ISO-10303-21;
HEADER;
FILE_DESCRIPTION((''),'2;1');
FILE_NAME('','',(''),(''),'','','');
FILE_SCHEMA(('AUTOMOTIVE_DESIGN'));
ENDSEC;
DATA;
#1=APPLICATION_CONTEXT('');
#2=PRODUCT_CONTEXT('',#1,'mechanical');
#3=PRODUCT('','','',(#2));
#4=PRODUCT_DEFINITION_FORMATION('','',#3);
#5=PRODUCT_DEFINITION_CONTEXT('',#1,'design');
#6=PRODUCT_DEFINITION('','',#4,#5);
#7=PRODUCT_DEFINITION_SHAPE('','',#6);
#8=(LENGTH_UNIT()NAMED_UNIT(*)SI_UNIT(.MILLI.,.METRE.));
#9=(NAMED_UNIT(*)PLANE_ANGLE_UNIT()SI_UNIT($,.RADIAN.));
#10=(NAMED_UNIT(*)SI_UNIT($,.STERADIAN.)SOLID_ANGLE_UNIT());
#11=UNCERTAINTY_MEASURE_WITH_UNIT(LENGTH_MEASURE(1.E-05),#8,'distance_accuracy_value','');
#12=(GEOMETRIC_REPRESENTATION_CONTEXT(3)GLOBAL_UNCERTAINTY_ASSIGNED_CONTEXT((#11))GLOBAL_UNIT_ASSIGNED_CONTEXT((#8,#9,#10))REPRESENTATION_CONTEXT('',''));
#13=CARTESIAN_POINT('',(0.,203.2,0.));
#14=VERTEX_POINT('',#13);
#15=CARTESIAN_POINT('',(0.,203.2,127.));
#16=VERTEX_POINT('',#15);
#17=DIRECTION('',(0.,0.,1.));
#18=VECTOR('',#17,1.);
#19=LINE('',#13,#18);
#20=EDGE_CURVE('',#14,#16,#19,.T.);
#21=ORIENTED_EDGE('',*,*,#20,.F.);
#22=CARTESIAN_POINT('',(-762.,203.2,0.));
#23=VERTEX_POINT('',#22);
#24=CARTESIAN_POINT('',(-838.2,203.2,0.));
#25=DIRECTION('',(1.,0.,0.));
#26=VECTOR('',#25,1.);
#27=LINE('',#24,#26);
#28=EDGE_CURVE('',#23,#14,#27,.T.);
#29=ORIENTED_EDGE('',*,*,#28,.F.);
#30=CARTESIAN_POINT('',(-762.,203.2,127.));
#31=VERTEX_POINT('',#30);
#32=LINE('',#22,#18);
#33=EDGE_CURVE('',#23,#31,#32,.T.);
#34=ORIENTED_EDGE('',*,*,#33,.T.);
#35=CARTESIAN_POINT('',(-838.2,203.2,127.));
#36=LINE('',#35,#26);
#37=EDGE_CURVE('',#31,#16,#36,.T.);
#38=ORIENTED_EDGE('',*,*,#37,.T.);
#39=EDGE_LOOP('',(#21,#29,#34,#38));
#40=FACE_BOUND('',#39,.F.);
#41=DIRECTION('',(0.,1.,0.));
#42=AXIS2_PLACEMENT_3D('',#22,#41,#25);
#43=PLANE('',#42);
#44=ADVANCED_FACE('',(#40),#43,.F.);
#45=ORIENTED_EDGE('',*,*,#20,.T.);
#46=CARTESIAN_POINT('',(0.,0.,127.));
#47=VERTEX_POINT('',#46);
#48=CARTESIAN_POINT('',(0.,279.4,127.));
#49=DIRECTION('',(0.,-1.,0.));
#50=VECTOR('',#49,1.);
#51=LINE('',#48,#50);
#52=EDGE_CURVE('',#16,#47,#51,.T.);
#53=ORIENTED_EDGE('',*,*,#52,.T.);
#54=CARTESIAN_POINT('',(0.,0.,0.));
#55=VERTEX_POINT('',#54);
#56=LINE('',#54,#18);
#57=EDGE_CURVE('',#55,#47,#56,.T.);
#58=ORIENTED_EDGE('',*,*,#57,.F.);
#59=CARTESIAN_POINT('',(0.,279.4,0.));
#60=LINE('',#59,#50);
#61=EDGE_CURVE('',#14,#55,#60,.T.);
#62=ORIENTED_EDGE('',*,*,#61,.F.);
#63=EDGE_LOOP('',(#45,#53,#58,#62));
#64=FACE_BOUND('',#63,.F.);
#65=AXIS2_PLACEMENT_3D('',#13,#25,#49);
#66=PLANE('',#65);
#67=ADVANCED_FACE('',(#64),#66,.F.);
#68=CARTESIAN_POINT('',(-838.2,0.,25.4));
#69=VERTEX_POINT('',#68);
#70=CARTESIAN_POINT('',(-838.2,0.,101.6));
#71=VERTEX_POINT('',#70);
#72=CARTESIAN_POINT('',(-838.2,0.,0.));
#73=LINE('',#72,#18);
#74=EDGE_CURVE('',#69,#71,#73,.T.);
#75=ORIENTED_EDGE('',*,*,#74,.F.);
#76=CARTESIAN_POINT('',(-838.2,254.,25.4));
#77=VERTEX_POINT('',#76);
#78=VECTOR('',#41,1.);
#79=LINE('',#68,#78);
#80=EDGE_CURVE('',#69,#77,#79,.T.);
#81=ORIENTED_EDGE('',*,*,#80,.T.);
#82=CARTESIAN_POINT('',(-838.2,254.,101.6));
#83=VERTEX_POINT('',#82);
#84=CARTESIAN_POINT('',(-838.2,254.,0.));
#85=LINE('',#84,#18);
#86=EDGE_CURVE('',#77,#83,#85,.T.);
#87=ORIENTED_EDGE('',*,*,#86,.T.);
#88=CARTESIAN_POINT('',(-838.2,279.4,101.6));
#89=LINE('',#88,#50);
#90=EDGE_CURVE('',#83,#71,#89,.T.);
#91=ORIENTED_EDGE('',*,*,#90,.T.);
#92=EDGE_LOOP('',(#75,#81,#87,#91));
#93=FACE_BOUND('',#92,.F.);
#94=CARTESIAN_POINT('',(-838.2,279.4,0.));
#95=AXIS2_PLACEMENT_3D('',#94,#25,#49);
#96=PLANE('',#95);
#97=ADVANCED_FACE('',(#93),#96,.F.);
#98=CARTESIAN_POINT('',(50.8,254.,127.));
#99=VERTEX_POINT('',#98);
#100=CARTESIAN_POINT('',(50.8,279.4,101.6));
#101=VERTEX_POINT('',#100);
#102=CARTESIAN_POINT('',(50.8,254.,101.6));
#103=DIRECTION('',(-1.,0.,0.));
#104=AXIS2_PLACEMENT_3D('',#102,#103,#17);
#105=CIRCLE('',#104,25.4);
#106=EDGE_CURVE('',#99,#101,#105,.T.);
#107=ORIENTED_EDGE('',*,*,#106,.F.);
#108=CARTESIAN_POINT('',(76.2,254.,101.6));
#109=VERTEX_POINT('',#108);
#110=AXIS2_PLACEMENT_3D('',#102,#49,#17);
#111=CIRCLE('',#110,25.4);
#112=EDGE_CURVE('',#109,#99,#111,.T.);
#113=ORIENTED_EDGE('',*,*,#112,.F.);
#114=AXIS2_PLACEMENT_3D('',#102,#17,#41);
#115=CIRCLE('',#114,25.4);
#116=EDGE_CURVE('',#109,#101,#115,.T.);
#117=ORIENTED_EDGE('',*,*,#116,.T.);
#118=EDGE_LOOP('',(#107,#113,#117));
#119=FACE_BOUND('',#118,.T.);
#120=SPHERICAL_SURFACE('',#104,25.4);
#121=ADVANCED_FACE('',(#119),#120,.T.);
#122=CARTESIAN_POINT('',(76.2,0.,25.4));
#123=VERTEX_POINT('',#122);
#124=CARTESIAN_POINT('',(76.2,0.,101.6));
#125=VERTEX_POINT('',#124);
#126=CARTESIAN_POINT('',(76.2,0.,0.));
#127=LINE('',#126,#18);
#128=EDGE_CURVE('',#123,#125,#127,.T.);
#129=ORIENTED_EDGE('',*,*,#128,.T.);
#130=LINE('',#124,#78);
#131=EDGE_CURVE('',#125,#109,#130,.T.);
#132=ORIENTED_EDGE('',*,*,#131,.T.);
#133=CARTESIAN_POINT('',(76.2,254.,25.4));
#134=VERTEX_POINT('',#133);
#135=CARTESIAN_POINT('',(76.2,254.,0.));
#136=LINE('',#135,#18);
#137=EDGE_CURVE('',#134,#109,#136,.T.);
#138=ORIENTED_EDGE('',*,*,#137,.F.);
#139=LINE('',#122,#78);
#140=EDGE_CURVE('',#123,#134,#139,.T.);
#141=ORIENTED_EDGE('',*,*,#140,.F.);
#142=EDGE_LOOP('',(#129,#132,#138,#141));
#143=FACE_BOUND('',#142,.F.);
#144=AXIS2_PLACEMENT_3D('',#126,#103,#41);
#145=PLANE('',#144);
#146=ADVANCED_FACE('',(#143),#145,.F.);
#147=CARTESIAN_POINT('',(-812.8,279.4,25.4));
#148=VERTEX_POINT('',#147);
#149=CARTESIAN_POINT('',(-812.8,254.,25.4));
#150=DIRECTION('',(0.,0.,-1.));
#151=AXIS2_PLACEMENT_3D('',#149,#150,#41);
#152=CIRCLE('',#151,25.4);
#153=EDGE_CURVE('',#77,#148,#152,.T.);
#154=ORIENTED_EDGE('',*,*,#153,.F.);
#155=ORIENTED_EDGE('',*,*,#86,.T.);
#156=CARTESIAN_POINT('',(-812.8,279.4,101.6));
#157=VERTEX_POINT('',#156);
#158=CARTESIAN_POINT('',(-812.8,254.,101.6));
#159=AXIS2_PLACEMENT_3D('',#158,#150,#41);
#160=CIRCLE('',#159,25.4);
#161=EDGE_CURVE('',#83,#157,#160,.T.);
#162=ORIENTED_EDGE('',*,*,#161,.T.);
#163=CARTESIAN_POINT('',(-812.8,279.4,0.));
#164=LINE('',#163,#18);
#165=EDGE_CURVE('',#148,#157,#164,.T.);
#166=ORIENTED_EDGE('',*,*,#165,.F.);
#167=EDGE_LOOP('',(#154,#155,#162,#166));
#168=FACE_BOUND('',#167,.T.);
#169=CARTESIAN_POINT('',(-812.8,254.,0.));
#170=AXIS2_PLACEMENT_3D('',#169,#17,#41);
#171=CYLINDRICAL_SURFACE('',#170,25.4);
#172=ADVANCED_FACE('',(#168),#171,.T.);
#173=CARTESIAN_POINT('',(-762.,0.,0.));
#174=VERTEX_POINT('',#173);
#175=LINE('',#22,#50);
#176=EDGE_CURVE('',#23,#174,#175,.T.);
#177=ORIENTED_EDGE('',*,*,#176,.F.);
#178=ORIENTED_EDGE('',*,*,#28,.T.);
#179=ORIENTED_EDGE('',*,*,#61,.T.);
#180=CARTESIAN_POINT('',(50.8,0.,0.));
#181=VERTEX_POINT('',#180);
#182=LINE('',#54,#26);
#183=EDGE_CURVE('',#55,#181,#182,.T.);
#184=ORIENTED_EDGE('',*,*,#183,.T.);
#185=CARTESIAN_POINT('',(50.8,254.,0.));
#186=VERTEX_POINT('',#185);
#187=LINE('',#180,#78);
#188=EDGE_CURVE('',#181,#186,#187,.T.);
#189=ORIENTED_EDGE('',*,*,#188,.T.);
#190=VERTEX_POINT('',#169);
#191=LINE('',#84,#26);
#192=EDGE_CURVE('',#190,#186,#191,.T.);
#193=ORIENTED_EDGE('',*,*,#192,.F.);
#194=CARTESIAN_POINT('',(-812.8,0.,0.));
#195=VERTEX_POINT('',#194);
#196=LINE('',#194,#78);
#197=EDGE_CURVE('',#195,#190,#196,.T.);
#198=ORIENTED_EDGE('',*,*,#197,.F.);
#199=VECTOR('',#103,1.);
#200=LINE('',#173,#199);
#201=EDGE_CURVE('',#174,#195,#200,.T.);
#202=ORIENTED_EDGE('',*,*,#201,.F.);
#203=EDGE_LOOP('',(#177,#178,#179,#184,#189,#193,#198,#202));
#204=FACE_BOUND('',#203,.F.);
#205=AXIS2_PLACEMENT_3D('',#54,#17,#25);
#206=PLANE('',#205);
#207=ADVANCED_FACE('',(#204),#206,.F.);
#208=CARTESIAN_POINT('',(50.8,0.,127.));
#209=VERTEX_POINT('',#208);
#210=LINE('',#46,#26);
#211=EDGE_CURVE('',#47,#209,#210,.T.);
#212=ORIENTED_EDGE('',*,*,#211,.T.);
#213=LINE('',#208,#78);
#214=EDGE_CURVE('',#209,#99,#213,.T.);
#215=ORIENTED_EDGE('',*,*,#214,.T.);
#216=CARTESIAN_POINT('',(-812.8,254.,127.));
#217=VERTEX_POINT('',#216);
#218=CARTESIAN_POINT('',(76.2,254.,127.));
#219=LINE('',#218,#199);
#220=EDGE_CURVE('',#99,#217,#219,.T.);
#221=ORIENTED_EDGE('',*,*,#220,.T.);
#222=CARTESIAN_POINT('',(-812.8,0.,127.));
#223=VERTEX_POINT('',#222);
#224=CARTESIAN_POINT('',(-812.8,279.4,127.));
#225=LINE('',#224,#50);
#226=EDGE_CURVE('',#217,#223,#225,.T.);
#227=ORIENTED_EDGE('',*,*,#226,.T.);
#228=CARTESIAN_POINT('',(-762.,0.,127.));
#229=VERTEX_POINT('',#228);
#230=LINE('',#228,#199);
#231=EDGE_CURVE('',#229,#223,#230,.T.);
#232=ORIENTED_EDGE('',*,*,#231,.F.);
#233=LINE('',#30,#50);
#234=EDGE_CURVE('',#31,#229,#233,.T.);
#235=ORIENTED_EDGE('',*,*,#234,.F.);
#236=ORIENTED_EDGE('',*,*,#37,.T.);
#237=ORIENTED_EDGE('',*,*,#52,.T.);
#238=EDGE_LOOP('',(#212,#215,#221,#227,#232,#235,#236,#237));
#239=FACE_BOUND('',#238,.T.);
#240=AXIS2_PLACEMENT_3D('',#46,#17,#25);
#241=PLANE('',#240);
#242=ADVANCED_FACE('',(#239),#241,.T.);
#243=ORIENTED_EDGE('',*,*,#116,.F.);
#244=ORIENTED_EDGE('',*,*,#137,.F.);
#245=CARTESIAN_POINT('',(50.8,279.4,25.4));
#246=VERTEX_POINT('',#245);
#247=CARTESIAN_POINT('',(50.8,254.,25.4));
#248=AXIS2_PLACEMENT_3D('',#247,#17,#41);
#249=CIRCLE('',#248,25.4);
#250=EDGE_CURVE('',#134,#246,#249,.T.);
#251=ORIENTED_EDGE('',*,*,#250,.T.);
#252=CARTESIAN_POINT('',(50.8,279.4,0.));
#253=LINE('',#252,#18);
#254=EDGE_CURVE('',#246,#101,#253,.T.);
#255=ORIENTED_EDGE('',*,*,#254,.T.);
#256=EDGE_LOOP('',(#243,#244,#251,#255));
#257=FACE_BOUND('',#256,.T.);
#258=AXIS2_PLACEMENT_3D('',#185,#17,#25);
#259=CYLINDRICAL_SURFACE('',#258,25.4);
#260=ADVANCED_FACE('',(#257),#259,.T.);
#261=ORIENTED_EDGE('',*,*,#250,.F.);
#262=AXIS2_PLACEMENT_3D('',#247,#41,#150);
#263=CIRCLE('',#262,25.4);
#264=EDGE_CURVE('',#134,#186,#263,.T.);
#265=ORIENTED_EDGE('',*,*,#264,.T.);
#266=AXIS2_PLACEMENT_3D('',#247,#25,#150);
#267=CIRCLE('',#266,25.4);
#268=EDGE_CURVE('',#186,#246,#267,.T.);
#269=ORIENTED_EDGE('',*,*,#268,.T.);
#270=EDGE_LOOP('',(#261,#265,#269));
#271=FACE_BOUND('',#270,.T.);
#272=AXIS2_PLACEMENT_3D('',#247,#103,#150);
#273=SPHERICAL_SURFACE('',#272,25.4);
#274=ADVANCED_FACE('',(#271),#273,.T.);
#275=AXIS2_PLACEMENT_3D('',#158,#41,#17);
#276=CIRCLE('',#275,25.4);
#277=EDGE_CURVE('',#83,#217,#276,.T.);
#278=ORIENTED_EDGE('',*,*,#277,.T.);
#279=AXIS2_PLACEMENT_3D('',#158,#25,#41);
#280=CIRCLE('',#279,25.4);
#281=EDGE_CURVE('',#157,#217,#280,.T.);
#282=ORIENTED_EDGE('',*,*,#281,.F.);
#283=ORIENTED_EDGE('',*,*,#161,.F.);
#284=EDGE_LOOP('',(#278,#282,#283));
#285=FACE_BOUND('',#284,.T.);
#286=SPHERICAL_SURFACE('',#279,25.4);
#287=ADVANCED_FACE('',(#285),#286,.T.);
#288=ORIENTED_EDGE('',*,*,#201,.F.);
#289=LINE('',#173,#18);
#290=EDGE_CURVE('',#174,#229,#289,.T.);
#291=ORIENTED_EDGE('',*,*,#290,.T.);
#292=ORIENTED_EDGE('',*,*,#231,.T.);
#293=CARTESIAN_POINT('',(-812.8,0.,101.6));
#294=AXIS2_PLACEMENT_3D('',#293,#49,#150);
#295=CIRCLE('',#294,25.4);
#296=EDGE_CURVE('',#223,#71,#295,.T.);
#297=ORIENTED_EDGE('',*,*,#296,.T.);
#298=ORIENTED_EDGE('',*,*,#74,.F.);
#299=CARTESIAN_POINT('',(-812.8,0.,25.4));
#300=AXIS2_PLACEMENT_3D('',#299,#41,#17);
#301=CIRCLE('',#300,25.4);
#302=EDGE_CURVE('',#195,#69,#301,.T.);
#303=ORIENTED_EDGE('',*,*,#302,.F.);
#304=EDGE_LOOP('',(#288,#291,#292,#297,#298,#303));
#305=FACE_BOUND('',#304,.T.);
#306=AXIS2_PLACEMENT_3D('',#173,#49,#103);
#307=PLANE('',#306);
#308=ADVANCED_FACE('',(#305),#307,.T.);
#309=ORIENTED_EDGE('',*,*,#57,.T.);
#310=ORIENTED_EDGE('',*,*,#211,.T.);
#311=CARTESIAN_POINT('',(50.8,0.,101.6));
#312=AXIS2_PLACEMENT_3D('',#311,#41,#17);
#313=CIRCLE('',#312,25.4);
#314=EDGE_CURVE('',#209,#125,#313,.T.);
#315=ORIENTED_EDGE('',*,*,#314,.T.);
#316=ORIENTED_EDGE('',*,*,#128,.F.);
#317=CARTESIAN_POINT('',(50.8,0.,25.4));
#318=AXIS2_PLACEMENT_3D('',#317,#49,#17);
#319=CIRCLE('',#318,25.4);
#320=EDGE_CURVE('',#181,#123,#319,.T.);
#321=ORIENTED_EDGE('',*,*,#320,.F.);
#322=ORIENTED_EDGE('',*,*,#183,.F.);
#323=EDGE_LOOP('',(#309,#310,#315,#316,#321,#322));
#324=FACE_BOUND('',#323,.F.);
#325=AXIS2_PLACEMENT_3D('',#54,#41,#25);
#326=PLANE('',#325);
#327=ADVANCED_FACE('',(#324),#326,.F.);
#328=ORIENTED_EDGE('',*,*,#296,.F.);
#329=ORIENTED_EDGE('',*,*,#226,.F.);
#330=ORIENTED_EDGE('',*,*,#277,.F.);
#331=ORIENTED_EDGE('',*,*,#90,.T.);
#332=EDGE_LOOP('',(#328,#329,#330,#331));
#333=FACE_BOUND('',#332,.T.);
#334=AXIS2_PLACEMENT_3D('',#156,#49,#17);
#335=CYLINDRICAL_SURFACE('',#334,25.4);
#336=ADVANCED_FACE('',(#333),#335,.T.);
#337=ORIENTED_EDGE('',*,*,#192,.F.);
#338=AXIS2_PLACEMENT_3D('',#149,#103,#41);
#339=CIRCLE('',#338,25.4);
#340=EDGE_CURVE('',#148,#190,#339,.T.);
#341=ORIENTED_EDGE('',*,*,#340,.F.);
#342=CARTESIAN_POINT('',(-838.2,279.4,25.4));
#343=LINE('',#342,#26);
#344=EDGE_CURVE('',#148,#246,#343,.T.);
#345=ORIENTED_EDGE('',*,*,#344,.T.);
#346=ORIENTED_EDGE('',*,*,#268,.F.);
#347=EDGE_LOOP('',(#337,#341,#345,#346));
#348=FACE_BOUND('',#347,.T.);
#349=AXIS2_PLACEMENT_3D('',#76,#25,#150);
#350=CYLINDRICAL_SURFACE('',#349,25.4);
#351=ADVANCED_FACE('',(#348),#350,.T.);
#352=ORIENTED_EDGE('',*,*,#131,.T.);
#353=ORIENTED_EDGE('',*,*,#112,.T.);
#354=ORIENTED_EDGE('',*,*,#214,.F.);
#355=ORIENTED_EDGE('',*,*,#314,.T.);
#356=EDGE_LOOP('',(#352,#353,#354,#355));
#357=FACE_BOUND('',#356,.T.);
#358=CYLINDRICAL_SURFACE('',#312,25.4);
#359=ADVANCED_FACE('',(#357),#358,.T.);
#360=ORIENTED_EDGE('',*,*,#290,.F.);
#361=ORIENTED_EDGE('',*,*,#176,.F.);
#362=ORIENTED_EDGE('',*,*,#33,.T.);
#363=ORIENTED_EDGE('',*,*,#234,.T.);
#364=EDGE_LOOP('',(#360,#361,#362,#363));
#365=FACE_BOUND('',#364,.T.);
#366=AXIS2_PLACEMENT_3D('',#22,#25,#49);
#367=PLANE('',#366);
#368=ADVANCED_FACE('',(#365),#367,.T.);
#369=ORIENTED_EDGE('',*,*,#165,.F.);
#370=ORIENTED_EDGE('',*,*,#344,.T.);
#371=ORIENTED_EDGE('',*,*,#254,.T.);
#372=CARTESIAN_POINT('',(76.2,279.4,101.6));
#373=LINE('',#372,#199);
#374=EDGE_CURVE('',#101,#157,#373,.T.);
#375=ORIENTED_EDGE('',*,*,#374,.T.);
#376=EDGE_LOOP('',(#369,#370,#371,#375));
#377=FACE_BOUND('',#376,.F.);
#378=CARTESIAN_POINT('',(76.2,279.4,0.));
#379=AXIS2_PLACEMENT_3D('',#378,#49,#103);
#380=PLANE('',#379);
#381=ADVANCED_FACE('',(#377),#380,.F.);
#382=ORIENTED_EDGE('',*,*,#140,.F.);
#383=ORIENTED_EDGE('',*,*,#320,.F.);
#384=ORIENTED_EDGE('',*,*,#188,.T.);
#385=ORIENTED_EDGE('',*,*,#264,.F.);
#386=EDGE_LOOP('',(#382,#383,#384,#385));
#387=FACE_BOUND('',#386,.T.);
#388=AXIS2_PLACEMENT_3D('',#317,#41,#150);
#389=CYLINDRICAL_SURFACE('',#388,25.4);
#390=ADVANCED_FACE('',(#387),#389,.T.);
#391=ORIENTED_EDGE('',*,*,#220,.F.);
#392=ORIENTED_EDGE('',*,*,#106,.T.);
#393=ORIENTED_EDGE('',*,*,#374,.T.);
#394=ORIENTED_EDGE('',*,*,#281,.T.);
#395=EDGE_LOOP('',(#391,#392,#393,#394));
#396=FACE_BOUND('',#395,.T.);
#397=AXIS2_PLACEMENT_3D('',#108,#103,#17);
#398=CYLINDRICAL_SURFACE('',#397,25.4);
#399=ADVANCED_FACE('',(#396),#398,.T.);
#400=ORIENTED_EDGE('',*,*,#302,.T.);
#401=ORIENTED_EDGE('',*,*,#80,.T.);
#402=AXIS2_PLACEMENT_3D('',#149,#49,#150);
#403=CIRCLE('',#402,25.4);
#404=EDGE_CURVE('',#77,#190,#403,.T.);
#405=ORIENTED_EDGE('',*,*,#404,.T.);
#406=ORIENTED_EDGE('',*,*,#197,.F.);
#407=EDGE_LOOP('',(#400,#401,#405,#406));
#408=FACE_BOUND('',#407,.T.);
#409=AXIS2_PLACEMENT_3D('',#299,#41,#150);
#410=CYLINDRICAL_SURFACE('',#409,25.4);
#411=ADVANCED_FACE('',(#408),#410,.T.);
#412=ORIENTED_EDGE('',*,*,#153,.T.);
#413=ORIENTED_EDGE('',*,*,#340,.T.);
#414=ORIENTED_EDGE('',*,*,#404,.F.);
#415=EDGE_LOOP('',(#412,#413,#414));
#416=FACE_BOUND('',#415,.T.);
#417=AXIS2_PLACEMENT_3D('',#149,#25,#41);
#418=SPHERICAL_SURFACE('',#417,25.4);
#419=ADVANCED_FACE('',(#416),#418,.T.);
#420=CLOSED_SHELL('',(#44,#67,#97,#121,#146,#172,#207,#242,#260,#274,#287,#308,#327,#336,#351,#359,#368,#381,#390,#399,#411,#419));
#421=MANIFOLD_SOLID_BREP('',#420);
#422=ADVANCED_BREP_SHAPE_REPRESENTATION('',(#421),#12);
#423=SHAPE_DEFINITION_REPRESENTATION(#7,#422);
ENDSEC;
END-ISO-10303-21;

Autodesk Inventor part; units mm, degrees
ref_plane "YZ Plane" through (0, 0, 0) normal (1, 0, 0) x (0, 1, 0)
ref_plane "XZ Plane" through (0, 0, 0) normal (0, 1, 0) x (-1, 0, 0)
ref_plane "XY Plane" through (0, 0, 0) normal (0, 0, 1) x (1, 0, 0)
sketch "Sketch1" plane through (0, 0, 0) normal (0, 0, 1) x (1, 0, 0)
  line L0 (0, 0) -> (76.2, 0)
  line L1 (76.2, 0) -> (76.2, 279.4)
  line L2 (76.2, 279.4) -> (0, 279.4)
  line L3 (0, 279.4) -> (0, 0)
  line L4 (0, 279.4) -> (-838.2, 279.4)
  line L5 (-838.2, 279.4) -> (-838.2, 203.2)
  line L6 (-838.2, 203.2) -> (0, 203.2)
  line L7 (0, 203.2) -> (0, 279.4)
  line L8 (-838.2, 203.2) -> (-762, 203.2)
  line L9 (-762, 203.2) -> (-762, 0)
  line L10 (-762, 0) -> (-838.2, 0)
  line L11 (-838.2, 0) -> (-838.2, 203.2)
  dimension "d0" = 76.2
  dimension "d1" = 279.4
  dimension "d2" = 838.2
  dimension "d3" = 76.2
  dimension "d4" = 76.2
  dimension "d5" = 203.2
extrude "Extrusion1" add sketch "Sketch1" along normal blind 127
sketch "Sketch2" plane through (-838.2, 279.4, 0) normal (0, 1, 0) x (1, 0, 0)
  line L0 (642.6606, -111.4085) -> (325.9156, -111.4085) construction
  line L1 (325.9156, -111.4085) -> (325.9156, -9.0111) construction
  line L2 (325.9156, -9.0111) -> (642.6606, -9.0111) construction
  line L3 (642.6606, -9.0111) -> (642.6606, -111.4085) construction
  point P0 (838.2, 0)
fillet "Fillet1" radius 25.4 8 edges at (-381, 279.4, 127) (-381, 279.4, 0) (76.2, 139.7, 127) (76.2, 139.7, 0) (76.2, 279.4, 63.5) (-838.2, 279.4, 63.5) (-838.2, 139.7, 127) (-838.2, 139.7, 0)
properties part number "bumper" material "Canvas, Blue Stripe"
